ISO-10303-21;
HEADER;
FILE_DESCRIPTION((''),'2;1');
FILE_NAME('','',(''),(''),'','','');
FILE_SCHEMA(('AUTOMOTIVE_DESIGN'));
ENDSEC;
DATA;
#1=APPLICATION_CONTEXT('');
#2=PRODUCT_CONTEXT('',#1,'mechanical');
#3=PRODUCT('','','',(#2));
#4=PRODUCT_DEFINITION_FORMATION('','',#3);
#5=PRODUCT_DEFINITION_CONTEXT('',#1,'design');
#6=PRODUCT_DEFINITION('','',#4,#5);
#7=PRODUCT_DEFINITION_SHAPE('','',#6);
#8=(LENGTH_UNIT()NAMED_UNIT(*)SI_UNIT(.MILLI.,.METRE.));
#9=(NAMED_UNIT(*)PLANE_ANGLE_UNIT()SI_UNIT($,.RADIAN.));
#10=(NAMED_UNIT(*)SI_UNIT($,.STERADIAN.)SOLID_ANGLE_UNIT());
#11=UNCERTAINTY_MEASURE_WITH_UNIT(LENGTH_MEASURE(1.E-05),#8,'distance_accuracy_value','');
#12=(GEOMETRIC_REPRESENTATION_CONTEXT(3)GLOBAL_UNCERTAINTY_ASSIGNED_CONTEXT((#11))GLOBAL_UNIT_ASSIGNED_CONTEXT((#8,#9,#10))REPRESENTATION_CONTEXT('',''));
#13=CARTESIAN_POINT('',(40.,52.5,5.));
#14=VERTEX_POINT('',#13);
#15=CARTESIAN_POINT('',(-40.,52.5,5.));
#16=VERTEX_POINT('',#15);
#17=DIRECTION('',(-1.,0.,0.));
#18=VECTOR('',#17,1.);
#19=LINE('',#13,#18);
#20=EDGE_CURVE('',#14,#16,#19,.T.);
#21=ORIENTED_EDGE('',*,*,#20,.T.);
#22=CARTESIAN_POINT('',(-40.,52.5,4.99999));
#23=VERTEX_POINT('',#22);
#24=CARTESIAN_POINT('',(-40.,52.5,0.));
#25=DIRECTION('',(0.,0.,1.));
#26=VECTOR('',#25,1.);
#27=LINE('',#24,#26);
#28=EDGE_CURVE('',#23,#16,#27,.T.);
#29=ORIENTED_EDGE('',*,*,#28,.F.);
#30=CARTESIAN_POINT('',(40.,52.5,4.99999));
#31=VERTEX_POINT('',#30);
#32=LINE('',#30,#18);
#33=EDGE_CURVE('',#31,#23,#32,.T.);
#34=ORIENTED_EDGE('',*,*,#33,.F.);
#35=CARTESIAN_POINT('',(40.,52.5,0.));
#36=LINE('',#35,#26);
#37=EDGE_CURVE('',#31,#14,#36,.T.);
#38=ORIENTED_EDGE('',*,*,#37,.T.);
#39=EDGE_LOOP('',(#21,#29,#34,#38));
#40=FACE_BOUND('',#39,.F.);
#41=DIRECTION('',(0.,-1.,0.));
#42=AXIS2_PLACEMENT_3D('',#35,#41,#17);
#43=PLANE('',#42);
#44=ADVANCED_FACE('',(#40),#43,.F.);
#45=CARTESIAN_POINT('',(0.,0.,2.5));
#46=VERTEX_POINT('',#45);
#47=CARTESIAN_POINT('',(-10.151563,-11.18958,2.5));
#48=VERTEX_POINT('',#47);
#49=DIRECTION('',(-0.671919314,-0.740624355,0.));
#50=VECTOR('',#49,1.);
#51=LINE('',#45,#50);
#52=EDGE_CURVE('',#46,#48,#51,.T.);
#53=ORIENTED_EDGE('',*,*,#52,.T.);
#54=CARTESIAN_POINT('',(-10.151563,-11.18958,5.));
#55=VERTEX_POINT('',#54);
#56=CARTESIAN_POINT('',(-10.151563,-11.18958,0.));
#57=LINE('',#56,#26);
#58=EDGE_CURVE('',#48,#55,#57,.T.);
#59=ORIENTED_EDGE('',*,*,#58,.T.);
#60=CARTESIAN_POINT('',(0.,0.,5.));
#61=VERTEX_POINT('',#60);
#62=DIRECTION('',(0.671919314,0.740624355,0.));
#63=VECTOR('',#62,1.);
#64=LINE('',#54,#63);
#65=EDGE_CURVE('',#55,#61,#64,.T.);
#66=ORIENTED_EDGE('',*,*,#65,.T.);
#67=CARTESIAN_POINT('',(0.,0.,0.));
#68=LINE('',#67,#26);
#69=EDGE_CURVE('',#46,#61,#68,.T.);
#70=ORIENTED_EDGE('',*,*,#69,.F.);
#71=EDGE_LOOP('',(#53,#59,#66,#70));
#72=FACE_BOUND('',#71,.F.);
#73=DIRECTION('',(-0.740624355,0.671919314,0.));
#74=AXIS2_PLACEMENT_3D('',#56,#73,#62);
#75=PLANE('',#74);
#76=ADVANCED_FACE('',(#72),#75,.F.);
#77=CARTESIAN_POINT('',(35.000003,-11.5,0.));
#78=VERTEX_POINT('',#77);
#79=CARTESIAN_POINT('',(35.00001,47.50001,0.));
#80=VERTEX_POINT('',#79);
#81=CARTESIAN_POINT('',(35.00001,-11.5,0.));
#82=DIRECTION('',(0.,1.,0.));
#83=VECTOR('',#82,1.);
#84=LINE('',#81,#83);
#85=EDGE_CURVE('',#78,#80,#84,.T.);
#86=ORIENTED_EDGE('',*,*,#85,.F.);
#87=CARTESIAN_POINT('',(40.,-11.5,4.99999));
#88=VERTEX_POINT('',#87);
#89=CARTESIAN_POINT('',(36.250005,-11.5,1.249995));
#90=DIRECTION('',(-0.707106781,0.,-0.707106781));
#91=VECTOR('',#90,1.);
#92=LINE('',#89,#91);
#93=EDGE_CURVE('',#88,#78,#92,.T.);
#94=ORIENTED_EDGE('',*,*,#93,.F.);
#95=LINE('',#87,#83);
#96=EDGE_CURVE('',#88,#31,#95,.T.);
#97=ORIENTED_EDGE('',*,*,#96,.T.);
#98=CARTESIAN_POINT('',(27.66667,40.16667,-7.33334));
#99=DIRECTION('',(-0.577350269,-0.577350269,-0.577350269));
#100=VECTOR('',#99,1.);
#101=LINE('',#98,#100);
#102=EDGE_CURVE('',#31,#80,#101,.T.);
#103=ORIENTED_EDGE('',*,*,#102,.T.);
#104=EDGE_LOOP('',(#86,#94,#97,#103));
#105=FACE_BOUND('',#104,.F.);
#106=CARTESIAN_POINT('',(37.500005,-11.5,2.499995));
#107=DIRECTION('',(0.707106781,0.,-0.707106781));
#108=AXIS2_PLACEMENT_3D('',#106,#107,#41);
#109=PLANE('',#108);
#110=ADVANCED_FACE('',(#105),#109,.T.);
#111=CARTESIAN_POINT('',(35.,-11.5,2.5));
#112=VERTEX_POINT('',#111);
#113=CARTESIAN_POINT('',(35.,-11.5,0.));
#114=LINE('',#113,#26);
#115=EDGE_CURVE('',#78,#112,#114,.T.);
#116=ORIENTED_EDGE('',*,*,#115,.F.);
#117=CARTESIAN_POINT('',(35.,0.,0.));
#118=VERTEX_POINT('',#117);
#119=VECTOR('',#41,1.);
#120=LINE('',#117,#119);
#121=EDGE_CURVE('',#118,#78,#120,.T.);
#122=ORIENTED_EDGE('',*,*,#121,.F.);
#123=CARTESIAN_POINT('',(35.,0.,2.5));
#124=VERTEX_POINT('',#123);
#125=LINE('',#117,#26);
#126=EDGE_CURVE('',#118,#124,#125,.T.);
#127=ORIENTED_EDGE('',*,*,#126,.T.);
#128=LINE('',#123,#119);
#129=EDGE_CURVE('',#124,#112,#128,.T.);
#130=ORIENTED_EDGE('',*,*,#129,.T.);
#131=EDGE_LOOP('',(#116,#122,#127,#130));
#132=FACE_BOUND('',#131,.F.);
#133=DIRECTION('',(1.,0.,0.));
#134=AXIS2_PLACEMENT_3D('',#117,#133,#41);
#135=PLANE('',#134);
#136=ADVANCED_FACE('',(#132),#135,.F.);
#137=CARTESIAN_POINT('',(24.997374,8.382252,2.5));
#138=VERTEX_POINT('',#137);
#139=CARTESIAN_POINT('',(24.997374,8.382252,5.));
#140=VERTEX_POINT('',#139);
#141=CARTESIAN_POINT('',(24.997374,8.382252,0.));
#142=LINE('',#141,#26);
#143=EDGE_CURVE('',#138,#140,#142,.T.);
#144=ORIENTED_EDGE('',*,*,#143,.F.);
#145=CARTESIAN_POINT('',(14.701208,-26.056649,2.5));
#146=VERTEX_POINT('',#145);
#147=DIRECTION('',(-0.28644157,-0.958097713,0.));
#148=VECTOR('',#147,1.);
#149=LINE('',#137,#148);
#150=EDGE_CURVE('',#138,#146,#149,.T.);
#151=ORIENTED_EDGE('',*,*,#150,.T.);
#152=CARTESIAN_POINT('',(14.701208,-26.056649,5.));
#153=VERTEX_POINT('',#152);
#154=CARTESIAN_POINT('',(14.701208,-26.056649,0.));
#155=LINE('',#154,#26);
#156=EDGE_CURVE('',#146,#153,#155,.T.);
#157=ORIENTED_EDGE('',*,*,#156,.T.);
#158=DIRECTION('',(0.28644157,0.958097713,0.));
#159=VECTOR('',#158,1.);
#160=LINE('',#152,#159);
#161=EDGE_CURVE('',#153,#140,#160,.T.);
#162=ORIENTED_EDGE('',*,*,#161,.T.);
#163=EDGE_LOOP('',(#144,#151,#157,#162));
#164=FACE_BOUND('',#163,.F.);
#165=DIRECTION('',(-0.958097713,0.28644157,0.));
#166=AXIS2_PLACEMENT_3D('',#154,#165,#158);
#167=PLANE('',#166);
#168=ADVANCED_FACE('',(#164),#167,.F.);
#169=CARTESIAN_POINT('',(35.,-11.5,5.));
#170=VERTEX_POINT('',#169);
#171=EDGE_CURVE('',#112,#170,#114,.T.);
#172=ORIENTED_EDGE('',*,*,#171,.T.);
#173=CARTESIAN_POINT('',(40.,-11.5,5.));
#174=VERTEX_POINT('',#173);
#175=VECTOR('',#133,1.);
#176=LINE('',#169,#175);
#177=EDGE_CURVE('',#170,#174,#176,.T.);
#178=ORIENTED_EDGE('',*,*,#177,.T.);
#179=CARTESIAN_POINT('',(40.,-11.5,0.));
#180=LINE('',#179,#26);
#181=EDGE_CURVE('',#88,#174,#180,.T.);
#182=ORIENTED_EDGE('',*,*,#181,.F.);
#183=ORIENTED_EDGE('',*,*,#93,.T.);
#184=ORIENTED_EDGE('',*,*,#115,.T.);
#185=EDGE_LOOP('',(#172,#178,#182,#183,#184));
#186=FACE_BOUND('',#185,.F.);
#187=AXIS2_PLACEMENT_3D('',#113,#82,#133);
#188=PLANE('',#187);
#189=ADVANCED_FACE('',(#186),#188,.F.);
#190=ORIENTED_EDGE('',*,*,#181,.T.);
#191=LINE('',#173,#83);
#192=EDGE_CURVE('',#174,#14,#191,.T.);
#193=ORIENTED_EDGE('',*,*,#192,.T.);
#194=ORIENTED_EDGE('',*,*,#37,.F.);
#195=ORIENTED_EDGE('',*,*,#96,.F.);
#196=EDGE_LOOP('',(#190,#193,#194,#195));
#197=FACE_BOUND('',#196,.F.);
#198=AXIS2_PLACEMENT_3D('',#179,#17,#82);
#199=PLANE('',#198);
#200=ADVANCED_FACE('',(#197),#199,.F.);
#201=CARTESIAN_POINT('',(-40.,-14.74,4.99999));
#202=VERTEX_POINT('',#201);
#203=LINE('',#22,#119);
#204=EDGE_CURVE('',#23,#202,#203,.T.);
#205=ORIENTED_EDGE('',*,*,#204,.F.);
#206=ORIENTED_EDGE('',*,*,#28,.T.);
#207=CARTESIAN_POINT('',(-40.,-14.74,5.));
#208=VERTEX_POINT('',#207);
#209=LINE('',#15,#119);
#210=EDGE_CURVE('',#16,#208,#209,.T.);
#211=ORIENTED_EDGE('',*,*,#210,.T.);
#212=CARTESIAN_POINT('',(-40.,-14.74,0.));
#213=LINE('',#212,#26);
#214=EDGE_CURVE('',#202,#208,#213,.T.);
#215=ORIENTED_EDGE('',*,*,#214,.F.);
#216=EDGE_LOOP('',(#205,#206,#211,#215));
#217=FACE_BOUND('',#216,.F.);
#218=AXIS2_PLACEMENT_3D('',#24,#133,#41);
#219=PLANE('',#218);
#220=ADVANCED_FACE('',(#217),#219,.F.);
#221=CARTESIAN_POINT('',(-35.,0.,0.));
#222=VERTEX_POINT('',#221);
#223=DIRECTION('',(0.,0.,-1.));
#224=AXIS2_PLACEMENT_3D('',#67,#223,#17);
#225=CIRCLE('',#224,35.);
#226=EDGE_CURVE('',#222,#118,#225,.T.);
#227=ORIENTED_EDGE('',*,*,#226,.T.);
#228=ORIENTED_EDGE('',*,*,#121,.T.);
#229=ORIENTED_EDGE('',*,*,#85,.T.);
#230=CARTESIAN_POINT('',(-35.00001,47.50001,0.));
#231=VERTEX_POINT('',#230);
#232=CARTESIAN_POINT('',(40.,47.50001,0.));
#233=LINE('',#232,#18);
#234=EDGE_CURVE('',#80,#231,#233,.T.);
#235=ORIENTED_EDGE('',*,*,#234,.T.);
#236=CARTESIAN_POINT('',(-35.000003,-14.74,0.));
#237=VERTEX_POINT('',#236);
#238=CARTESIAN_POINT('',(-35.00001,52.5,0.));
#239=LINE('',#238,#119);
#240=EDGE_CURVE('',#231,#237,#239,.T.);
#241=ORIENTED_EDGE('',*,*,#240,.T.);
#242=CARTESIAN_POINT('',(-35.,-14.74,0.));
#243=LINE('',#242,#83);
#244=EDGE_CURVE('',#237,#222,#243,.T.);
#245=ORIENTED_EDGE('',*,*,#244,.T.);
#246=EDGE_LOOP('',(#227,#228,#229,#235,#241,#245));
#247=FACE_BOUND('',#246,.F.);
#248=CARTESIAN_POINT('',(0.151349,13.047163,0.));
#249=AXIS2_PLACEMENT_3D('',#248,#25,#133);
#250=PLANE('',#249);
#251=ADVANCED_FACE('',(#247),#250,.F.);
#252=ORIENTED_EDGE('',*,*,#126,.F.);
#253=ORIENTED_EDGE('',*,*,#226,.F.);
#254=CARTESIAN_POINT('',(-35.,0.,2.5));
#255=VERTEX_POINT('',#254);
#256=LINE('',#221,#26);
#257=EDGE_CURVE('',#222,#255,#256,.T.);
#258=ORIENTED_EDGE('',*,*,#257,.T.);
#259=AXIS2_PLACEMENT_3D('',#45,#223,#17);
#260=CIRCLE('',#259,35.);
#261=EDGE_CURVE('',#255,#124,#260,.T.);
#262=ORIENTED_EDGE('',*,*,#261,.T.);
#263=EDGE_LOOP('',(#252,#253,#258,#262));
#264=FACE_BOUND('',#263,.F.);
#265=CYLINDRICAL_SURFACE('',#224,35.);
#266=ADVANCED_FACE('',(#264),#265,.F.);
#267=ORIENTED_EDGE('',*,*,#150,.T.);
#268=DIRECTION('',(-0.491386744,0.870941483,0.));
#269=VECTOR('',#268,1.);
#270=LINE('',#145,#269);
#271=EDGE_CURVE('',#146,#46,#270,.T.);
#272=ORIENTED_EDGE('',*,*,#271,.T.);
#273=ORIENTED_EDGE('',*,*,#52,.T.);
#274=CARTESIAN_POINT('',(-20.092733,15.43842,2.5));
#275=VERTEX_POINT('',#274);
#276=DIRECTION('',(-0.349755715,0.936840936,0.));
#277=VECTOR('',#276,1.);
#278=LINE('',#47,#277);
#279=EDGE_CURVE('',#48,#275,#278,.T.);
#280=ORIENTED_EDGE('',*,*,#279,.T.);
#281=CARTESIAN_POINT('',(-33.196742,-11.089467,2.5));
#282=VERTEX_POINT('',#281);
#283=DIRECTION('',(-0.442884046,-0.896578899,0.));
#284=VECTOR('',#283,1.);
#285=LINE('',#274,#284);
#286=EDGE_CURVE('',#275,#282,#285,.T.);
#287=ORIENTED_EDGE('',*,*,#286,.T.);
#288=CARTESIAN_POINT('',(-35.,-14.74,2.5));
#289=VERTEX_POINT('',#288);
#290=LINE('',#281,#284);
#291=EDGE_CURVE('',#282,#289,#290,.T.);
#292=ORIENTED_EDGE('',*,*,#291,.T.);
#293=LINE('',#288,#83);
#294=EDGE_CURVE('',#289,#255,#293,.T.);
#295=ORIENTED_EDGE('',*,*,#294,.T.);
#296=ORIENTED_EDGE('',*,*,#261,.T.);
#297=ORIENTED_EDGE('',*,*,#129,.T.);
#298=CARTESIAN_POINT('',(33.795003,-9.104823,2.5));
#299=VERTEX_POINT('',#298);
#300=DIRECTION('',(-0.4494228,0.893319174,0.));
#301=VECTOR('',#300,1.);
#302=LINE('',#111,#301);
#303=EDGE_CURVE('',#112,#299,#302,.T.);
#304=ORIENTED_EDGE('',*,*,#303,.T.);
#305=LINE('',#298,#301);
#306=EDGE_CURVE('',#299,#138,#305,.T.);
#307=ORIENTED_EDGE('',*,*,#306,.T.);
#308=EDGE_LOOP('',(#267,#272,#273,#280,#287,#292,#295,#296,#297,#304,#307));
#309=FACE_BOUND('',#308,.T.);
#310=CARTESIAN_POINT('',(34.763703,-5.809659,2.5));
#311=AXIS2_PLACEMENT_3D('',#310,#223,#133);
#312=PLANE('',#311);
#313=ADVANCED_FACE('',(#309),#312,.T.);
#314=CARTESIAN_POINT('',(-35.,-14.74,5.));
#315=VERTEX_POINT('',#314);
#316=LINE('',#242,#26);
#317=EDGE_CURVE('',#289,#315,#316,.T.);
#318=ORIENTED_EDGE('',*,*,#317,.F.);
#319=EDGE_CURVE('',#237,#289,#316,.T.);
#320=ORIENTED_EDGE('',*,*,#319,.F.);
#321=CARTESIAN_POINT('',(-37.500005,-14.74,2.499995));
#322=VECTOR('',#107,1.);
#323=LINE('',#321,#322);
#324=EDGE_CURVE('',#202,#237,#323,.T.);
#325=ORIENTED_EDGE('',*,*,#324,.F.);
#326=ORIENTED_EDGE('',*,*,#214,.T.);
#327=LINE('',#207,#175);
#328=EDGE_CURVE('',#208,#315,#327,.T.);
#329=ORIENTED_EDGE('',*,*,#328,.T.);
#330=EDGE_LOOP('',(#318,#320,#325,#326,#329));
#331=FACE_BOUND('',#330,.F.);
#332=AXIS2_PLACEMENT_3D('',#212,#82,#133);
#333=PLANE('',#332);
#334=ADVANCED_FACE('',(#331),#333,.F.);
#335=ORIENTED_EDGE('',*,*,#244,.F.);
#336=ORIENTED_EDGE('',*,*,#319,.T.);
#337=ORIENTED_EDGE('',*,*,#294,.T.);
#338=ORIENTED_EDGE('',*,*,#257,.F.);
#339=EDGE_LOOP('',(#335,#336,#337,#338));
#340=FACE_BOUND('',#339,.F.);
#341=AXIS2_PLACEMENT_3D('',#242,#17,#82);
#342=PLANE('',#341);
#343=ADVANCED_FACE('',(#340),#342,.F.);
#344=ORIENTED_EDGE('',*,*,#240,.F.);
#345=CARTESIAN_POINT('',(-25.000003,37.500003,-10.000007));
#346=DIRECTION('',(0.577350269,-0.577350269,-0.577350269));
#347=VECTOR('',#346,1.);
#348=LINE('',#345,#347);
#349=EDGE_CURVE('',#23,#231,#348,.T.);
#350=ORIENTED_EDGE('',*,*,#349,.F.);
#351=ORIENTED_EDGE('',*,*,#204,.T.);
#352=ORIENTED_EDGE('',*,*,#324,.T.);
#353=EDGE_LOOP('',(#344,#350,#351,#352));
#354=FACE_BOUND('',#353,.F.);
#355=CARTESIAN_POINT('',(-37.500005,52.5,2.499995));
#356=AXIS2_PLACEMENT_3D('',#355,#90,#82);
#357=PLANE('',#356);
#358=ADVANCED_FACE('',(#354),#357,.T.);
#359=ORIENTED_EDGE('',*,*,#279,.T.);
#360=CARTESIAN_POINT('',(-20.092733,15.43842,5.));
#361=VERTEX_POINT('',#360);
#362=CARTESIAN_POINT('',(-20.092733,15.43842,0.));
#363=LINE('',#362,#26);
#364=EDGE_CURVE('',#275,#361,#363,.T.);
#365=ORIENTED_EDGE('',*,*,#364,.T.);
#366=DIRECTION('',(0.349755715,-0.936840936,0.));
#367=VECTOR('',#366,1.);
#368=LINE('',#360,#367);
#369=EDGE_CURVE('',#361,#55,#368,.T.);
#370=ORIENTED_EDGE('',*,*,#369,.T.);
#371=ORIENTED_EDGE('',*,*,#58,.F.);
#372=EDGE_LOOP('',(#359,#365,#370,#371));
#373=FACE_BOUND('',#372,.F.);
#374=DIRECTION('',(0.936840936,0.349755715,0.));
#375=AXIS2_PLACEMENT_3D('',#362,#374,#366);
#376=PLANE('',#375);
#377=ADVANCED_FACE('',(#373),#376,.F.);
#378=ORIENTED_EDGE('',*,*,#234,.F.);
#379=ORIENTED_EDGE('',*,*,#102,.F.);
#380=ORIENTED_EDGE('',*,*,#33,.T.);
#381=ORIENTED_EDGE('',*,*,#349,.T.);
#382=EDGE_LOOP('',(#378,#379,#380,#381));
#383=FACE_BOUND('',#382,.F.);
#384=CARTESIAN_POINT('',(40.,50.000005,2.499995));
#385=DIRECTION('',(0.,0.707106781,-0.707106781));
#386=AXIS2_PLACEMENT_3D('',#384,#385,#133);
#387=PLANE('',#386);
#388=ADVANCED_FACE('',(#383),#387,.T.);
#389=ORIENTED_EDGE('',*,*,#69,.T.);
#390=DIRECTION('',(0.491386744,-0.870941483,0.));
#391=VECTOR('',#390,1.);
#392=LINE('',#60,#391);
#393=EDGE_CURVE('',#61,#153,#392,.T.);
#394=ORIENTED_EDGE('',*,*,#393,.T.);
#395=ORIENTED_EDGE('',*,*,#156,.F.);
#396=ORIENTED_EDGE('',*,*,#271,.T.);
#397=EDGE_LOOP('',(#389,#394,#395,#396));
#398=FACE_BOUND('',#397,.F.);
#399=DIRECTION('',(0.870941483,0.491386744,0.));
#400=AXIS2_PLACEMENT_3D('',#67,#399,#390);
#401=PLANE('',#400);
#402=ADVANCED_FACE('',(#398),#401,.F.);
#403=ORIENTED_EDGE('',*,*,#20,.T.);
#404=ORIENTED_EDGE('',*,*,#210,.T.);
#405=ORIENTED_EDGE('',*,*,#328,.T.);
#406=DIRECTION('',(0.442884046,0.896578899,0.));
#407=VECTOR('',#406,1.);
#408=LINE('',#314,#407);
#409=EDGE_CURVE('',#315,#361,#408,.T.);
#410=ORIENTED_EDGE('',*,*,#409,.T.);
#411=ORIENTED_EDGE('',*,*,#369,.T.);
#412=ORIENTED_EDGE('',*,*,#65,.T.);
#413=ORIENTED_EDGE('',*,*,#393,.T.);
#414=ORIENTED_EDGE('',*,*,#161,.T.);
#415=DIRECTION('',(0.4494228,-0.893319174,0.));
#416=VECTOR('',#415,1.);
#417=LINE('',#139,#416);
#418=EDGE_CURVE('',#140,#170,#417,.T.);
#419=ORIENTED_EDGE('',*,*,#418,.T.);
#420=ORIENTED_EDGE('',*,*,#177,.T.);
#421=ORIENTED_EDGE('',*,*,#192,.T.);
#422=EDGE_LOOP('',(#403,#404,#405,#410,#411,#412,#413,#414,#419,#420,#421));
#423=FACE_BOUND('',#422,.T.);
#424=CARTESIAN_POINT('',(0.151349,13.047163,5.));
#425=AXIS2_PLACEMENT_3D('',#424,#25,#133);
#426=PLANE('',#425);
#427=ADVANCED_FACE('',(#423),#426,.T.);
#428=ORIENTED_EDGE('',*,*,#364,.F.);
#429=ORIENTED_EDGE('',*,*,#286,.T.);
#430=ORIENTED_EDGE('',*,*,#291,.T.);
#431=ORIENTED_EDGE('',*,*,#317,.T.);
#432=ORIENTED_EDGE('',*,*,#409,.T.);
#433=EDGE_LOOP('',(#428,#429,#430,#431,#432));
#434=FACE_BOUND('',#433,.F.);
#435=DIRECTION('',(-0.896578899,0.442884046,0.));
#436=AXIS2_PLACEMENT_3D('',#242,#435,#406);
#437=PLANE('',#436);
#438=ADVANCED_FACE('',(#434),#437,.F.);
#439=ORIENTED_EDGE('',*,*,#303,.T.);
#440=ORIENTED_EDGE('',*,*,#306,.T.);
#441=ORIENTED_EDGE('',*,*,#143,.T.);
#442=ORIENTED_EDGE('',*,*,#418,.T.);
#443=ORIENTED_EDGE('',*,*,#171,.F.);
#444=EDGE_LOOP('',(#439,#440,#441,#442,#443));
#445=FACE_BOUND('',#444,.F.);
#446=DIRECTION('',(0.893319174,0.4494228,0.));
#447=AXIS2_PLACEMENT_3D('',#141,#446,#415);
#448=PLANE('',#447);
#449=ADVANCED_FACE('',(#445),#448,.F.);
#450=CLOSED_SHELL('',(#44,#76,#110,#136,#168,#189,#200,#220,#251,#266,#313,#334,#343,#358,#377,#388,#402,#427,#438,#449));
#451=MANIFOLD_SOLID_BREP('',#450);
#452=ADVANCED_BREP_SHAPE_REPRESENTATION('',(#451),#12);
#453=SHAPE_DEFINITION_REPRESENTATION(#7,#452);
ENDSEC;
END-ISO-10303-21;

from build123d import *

# Parameters (mm, degrees)
F1_DEPTH = 5
F2_SIZE  = 4.99999
F4_DEPTH = 2.5


# Not quite as in the source:
# - a fillet or chamfer is up to 0.001 mm smaller than in the source, because OpenCascade refuses the exact size


with BuildPart() as f1:
    # F0 (on Top) → F1 (new body)
    with BuildSketch(Plane.XY):
        Polygon((24.9973740429, 8.3822524399), (35, -11.5), (35, 47.5), (-35, 47.5), (-35, -14.74), (-20.0927332044, 15.4384202456), (-10.1515629949, -11.1895798258), (0, 0), (14.7012080997, -26.056649141), align=None)
        Polygon((35, 47.5), (35, -11.5), (40, -11.5), (40, 52.5), (-40, 52.5), (-40, -14.74), (-35, -14.74), (-35, 47.5), align=None)
    extrude(amount=F1_DEPTH)

    # F2 (size 5 in the source; OpenCascade refuses exactly that, so slightly less here)
    f2_edges = [f1.edges().sort_by_distance(p)[0] for p in [
        (40, 20.5, 0),
        (0, 52.5, 0),
        (-40, 18.88, 0),
    ]]
    chamfer(f2_edges, length=F2_SIZE)

    # F3 (on face) → F4 (cut)
    with BuildSketch(Plane(origin=(0, 0, 0), x_dir=(1, 0, 0), z_dir=(0, 0, -1))):
        with BuildLine():
            ThreePointArc((33.7950026252, 9.1048227638), (34.6974429309, 4.5921078013), (35, 0))
            Line((35, 0), (35, 11.5))
            Line((35, 11.5), (33.7950026252, 9.1048227638))
        make_face()
        with BuildLine():
            Line((-35, 14.74), (-35, 0))
            ThreePointArc((-35, 0), (-34.5462442763, 5.6175623185), (-33.1967424913, 11.0894674339))
            Line((-33.1967424913, 11.0894674339), (-35, 14.74))
        make_face()
        with BuildLine():
            ThreePointArc((-33.1967424913, 11.0894674339), (-34.5462442763, 5.6175623185), (-35, 0))
            ThreePointArc((-35, 0), (0, -35), (35, 0))
            ThreePointArc((35, 0), (34.6974429309, 4.5921078013), (33.7950026252, 9.1048227638))
            Line((33.7950026252, 9.1048227638), (24.9973740429, -8.3822524399))
            Line((24.9973740429, -8.3822524399), (14.7012080997, 26.056649141))
            Line((14.7012080997, 26.056649141), (0, 0))
            Line((0, 0), (-10.1515629949, 11.1895798258))
            Line((-10.1515629949, 11.1895798258), (-20.0927332044, -15.4384202456))
            Line((-20.0927332044, -15.4384202456), (-33.1967424913, 11.0894674339))
        make_face()
    extrude(amount=-F4_DEPTH, mode=Mode.SUBTRACT)


solid = f1.part
